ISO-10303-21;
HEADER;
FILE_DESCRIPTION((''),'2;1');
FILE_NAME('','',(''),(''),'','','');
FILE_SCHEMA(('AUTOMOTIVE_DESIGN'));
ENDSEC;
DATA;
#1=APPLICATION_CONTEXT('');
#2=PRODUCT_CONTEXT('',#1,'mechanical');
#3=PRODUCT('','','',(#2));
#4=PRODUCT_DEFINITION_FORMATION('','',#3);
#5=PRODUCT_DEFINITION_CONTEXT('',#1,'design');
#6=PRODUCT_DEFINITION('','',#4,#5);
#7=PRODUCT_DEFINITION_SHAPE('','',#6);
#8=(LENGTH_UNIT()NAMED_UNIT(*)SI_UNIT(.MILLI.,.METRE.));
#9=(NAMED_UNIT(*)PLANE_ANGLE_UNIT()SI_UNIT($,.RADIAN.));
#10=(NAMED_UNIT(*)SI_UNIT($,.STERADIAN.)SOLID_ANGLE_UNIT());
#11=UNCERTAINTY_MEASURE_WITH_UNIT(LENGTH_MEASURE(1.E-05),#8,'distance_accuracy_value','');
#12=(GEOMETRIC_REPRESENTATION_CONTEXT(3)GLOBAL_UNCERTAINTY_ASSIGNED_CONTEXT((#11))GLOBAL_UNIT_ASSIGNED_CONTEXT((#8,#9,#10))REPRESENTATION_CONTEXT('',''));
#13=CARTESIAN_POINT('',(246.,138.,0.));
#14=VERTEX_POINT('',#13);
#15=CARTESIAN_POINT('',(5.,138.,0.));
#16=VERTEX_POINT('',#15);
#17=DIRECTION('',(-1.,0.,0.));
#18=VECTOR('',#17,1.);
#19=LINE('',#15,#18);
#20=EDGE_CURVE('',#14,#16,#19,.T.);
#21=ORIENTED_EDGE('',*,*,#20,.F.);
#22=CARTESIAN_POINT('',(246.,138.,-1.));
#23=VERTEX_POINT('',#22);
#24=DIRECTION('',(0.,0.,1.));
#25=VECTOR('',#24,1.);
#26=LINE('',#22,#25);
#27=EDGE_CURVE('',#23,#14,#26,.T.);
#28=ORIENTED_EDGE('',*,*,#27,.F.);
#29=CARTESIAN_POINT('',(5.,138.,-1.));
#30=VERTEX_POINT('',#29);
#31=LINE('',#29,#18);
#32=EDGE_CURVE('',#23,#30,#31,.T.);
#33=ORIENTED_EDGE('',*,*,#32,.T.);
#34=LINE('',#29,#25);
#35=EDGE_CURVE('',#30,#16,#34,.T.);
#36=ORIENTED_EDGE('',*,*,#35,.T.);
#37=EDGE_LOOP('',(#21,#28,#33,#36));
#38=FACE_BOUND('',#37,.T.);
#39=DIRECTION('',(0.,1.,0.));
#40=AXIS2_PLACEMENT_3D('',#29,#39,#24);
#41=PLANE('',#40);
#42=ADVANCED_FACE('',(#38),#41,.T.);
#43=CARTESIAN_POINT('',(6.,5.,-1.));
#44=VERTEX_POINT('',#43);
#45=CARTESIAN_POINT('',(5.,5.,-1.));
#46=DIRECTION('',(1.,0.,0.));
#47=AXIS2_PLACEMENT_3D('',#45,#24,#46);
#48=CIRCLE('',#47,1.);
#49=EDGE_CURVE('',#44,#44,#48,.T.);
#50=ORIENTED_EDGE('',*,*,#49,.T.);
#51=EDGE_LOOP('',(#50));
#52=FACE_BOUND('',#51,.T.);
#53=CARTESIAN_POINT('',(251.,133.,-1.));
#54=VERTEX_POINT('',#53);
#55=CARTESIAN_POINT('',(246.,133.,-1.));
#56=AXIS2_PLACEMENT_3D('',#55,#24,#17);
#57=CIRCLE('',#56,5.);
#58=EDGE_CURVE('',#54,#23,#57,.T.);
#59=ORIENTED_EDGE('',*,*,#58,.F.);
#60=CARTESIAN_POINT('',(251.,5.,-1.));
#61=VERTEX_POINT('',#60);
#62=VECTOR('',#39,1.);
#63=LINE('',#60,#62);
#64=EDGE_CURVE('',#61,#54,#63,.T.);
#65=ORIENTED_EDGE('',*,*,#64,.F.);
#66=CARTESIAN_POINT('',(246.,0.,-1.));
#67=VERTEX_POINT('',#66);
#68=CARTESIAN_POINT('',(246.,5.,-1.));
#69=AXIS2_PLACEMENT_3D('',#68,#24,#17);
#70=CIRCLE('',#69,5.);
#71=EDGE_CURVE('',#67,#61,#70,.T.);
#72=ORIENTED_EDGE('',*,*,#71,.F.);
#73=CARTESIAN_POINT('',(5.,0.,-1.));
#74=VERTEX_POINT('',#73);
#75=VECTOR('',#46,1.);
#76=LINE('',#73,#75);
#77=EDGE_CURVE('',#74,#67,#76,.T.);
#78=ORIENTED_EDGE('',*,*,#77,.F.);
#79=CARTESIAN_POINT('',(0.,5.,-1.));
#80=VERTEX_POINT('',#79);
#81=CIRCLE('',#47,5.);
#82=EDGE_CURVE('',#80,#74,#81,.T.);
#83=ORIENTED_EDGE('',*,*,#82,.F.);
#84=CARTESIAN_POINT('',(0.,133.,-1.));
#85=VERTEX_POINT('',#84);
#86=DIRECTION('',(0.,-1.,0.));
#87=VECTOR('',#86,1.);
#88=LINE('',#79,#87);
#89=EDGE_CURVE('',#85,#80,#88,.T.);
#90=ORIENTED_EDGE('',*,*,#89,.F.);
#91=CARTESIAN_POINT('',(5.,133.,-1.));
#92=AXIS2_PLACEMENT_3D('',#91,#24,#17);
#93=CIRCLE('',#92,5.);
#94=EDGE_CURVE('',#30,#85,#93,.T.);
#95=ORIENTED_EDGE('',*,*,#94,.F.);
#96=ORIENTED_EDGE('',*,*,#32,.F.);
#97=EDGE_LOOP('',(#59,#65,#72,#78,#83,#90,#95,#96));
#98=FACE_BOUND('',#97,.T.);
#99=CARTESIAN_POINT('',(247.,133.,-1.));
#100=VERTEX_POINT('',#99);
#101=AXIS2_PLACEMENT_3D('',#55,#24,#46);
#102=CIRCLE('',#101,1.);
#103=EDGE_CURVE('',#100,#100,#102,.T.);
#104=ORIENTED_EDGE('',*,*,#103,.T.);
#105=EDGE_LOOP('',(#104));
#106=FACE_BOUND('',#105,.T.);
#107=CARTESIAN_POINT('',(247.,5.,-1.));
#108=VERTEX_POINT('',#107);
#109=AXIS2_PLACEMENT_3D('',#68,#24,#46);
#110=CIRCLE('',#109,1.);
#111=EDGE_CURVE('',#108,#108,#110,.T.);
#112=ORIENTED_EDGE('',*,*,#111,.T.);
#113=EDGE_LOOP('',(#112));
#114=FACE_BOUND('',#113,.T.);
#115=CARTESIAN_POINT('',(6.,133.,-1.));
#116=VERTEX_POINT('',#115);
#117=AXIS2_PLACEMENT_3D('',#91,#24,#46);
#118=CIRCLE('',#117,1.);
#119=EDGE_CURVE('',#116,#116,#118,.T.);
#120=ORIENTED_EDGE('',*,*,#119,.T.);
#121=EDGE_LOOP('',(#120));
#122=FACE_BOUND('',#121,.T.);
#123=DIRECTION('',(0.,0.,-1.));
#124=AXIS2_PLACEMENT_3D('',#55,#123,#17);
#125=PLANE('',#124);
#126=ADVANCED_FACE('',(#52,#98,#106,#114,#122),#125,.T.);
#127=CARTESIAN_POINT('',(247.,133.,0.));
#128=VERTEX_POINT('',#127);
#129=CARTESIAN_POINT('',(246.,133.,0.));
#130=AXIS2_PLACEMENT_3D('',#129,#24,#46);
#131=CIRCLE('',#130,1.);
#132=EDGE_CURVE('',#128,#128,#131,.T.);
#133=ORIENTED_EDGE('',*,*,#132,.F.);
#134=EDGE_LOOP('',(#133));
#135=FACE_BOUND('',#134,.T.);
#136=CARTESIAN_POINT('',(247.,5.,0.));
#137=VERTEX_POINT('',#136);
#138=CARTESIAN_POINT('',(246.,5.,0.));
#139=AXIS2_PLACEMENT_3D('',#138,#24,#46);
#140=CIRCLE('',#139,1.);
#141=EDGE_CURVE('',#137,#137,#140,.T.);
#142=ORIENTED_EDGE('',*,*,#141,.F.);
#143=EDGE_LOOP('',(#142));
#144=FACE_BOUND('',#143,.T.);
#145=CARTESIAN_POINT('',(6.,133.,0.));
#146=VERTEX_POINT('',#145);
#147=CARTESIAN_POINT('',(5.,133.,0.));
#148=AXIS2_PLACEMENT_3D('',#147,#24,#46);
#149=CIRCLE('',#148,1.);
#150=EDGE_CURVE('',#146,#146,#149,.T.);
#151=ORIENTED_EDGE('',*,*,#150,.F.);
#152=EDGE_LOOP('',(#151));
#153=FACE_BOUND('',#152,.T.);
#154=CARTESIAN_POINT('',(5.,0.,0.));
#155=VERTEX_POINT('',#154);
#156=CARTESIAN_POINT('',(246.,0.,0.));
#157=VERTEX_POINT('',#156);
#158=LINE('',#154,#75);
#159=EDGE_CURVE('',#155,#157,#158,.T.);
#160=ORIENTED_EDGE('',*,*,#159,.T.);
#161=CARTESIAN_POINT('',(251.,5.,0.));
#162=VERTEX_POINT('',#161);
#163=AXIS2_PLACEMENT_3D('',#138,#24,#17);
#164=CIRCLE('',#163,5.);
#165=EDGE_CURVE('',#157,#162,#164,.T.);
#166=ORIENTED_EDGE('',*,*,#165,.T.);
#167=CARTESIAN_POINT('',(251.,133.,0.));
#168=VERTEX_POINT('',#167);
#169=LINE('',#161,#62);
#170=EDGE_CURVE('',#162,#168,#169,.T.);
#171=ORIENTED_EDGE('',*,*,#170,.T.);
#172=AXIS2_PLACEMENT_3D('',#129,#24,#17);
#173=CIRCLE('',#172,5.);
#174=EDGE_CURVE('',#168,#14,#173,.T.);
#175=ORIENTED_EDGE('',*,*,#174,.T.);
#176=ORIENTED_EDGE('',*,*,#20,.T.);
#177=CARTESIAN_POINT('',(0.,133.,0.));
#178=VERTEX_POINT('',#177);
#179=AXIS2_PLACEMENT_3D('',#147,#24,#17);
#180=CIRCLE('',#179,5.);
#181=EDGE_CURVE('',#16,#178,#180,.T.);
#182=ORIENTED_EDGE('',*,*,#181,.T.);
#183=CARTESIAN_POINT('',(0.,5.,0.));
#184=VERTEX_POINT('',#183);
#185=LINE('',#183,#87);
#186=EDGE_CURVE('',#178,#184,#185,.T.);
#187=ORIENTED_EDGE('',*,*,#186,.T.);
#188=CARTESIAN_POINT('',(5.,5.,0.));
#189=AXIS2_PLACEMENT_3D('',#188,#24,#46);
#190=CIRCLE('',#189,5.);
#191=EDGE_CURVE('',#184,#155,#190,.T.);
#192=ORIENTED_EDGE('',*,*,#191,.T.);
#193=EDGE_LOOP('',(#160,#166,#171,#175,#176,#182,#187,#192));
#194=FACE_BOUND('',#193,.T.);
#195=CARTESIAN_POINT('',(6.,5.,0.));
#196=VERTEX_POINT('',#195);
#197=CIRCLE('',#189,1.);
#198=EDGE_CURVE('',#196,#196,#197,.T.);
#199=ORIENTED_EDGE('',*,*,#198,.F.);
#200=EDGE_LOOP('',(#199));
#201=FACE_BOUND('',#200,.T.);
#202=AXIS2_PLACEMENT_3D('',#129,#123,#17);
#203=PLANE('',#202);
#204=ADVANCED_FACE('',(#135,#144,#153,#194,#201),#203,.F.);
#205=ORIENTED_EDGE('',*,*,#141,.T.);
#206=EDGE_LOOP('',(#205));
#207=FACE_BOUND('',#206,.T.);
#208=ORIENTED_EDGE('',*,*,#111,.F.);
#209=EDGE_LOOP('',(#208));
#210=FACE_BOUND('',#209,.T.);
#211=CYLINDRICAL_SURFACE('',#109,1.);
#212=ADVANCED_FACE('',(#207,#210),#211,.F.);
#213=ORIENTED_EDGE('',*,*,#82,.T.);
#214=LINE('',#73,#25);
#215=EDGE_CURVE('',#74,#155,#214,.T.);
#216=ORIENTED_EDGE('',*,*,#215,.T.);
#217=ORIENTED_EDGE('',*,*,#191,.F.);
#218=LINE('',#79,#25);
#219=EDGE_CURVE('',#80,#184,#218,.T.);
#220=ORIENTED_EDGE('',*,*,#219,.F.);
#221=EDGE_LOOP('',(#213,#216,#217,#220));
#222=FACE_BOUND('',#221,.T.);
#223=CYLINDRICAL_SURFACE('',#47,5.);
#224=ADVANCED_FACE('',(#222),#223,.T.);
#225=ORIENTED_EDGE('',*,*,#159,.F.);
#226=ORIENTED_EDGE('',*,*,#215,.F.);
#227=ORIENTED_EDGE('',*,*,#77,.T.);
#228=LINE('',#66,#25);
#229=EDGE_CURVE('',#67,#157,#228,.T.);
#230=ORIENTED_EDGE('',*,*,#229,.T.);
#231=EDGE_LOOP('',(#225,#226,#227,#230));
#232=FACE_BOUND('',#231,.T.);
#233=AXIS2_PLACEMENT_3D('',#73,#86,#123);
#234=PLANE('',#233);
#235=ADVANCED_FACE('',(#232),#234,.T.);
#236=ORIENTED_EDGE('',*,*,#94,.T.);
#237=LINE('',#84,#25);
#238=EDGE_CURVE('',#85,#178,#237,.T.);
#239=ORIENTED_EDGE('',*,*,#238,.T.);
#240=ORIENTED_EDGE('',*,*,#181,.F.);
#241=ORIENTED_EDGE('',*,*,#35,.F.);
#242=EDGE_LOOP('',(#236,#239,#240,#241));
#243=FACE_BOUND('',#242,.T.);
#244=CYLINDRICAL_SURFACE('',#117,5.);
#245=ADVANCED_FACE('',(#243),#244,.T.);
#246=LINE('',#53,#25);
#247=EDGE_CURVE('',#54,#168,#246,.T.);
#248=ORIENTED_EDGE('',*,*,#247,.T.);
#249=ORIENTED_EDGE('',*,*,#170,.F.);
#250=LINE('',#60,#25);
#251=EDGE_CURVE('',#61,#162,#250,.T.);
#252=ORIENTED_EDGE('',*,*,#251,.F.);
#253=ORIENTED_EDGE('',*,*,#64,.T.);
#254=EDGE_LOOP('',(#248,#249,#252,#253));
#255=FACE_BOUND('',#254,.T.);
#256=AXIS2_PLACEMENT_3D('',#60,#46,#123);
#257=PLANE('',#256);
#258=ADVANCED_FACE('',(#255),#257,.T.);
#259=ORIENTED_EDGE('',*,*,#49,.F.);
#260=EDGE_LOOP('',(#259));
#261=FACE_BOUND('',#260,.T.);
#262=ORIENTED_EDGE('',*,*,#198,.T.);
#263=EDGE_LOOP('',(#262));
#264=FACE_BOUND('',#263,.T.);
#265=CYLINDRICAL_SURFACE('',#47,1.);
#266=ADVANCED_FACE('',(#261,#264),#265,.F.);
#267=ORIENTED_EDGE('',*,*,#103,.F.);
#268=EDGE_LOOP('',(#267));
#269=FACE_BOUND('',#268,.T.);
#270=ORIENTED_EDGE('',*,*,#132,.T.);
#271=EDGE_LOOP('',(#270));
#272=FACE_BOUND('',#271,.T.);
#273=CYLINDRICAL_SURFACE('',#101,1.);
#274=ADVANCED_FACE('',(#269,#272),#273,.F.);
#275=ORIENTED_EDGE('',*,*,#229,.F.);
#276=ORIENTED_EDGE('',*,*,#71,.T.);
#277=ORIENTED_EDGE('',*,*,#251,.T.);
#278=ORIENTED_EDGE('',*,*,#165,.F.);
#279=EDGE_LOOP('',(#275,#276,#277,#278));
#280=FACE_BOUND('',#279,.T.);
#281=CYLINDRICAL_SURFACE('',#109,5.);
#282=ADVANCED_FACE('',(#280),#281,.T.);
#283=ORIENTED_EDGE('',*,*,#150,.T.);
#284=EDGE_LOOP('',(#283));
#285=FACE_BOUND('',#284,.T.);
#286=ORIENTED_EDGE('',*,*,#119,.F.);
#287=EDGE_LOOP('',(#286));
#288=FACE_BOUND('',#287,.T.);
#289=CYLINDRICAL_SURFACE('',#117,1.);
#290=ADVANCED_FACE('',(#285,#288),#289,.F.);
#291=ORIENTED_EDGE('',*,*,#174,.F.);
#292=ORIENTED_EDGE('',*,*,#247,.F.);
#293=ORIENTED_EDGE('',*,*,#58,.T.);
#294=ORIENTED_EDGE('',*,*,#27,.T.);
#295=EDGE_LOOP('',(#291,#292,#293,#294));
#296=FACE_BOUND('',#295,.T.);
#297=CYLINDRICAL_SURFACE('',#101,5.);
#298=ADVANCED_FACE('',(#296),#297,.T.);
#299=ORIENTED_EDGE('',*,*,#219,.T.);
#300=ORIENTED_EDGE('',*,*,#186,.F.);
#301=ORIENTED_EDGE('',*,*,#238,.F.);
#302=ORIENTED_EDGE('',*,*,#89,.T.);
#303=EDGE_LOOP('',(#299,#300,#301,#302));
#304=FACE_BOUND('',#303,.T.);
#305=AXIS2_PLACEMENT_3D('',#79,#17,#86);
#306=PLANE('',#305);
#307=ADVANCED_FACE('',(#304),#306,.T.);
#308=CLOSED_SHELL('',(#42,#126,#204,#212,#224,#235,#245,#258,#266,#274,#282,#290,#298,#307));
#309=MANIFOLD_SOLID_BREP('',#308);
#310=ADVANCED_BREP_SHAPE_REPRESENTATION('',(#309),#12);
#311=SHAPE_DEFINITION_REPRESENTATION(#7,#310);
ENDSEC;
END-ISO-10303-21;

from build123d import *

# Parameters (mm, degrees)
SKETCH1_R          = 1
BASE_FLANGE1_DEPTH = 1


# Sheet-metal steps are written as plain solids
with BuildPart() as part:
    # Sketch1 → Base-Flange1 (new body)
    with BuildSketch(Plane.XY):
        with BuildLine():
            Line((5, 0), (246, 0))
            ThreePointArc((246, 0), (249.535533906, 1.464466094), (251, 5))
            Line((251, 5), (251, 133))
            ThreePointArc((251, 133), (249.535533906, 136.535533906), (246, 138))
            Line((246, 138), (5, 138))
            ThreePointArc((5, 138), (1.464466094, 136.535533906), (0, 133))
            Line((0, 133), (0, 5))
            ThreePointArc((0, 5), (1.464466094, 1.464466094), (5, 0))
        make_face()
        with Locations((5, 133)):
            Circle(SKETCH1_R, mode=Mode.SUBTRACT)
        with Locations((5, 5)):
            Circle(SKETCH1_R, mode=Mode.SUBTRACT)
        with Locations((246, 133)):
            Circle(SKETCH1_R, mode=Mode.SUBTRACT)
        with Locations((246, 5)):
            Circle(SKETCH1_R, mode=Mode.SUBTRACT)
    extrude(amount=-BASE_FLANGE1_DEPTH)


solid = part.part
